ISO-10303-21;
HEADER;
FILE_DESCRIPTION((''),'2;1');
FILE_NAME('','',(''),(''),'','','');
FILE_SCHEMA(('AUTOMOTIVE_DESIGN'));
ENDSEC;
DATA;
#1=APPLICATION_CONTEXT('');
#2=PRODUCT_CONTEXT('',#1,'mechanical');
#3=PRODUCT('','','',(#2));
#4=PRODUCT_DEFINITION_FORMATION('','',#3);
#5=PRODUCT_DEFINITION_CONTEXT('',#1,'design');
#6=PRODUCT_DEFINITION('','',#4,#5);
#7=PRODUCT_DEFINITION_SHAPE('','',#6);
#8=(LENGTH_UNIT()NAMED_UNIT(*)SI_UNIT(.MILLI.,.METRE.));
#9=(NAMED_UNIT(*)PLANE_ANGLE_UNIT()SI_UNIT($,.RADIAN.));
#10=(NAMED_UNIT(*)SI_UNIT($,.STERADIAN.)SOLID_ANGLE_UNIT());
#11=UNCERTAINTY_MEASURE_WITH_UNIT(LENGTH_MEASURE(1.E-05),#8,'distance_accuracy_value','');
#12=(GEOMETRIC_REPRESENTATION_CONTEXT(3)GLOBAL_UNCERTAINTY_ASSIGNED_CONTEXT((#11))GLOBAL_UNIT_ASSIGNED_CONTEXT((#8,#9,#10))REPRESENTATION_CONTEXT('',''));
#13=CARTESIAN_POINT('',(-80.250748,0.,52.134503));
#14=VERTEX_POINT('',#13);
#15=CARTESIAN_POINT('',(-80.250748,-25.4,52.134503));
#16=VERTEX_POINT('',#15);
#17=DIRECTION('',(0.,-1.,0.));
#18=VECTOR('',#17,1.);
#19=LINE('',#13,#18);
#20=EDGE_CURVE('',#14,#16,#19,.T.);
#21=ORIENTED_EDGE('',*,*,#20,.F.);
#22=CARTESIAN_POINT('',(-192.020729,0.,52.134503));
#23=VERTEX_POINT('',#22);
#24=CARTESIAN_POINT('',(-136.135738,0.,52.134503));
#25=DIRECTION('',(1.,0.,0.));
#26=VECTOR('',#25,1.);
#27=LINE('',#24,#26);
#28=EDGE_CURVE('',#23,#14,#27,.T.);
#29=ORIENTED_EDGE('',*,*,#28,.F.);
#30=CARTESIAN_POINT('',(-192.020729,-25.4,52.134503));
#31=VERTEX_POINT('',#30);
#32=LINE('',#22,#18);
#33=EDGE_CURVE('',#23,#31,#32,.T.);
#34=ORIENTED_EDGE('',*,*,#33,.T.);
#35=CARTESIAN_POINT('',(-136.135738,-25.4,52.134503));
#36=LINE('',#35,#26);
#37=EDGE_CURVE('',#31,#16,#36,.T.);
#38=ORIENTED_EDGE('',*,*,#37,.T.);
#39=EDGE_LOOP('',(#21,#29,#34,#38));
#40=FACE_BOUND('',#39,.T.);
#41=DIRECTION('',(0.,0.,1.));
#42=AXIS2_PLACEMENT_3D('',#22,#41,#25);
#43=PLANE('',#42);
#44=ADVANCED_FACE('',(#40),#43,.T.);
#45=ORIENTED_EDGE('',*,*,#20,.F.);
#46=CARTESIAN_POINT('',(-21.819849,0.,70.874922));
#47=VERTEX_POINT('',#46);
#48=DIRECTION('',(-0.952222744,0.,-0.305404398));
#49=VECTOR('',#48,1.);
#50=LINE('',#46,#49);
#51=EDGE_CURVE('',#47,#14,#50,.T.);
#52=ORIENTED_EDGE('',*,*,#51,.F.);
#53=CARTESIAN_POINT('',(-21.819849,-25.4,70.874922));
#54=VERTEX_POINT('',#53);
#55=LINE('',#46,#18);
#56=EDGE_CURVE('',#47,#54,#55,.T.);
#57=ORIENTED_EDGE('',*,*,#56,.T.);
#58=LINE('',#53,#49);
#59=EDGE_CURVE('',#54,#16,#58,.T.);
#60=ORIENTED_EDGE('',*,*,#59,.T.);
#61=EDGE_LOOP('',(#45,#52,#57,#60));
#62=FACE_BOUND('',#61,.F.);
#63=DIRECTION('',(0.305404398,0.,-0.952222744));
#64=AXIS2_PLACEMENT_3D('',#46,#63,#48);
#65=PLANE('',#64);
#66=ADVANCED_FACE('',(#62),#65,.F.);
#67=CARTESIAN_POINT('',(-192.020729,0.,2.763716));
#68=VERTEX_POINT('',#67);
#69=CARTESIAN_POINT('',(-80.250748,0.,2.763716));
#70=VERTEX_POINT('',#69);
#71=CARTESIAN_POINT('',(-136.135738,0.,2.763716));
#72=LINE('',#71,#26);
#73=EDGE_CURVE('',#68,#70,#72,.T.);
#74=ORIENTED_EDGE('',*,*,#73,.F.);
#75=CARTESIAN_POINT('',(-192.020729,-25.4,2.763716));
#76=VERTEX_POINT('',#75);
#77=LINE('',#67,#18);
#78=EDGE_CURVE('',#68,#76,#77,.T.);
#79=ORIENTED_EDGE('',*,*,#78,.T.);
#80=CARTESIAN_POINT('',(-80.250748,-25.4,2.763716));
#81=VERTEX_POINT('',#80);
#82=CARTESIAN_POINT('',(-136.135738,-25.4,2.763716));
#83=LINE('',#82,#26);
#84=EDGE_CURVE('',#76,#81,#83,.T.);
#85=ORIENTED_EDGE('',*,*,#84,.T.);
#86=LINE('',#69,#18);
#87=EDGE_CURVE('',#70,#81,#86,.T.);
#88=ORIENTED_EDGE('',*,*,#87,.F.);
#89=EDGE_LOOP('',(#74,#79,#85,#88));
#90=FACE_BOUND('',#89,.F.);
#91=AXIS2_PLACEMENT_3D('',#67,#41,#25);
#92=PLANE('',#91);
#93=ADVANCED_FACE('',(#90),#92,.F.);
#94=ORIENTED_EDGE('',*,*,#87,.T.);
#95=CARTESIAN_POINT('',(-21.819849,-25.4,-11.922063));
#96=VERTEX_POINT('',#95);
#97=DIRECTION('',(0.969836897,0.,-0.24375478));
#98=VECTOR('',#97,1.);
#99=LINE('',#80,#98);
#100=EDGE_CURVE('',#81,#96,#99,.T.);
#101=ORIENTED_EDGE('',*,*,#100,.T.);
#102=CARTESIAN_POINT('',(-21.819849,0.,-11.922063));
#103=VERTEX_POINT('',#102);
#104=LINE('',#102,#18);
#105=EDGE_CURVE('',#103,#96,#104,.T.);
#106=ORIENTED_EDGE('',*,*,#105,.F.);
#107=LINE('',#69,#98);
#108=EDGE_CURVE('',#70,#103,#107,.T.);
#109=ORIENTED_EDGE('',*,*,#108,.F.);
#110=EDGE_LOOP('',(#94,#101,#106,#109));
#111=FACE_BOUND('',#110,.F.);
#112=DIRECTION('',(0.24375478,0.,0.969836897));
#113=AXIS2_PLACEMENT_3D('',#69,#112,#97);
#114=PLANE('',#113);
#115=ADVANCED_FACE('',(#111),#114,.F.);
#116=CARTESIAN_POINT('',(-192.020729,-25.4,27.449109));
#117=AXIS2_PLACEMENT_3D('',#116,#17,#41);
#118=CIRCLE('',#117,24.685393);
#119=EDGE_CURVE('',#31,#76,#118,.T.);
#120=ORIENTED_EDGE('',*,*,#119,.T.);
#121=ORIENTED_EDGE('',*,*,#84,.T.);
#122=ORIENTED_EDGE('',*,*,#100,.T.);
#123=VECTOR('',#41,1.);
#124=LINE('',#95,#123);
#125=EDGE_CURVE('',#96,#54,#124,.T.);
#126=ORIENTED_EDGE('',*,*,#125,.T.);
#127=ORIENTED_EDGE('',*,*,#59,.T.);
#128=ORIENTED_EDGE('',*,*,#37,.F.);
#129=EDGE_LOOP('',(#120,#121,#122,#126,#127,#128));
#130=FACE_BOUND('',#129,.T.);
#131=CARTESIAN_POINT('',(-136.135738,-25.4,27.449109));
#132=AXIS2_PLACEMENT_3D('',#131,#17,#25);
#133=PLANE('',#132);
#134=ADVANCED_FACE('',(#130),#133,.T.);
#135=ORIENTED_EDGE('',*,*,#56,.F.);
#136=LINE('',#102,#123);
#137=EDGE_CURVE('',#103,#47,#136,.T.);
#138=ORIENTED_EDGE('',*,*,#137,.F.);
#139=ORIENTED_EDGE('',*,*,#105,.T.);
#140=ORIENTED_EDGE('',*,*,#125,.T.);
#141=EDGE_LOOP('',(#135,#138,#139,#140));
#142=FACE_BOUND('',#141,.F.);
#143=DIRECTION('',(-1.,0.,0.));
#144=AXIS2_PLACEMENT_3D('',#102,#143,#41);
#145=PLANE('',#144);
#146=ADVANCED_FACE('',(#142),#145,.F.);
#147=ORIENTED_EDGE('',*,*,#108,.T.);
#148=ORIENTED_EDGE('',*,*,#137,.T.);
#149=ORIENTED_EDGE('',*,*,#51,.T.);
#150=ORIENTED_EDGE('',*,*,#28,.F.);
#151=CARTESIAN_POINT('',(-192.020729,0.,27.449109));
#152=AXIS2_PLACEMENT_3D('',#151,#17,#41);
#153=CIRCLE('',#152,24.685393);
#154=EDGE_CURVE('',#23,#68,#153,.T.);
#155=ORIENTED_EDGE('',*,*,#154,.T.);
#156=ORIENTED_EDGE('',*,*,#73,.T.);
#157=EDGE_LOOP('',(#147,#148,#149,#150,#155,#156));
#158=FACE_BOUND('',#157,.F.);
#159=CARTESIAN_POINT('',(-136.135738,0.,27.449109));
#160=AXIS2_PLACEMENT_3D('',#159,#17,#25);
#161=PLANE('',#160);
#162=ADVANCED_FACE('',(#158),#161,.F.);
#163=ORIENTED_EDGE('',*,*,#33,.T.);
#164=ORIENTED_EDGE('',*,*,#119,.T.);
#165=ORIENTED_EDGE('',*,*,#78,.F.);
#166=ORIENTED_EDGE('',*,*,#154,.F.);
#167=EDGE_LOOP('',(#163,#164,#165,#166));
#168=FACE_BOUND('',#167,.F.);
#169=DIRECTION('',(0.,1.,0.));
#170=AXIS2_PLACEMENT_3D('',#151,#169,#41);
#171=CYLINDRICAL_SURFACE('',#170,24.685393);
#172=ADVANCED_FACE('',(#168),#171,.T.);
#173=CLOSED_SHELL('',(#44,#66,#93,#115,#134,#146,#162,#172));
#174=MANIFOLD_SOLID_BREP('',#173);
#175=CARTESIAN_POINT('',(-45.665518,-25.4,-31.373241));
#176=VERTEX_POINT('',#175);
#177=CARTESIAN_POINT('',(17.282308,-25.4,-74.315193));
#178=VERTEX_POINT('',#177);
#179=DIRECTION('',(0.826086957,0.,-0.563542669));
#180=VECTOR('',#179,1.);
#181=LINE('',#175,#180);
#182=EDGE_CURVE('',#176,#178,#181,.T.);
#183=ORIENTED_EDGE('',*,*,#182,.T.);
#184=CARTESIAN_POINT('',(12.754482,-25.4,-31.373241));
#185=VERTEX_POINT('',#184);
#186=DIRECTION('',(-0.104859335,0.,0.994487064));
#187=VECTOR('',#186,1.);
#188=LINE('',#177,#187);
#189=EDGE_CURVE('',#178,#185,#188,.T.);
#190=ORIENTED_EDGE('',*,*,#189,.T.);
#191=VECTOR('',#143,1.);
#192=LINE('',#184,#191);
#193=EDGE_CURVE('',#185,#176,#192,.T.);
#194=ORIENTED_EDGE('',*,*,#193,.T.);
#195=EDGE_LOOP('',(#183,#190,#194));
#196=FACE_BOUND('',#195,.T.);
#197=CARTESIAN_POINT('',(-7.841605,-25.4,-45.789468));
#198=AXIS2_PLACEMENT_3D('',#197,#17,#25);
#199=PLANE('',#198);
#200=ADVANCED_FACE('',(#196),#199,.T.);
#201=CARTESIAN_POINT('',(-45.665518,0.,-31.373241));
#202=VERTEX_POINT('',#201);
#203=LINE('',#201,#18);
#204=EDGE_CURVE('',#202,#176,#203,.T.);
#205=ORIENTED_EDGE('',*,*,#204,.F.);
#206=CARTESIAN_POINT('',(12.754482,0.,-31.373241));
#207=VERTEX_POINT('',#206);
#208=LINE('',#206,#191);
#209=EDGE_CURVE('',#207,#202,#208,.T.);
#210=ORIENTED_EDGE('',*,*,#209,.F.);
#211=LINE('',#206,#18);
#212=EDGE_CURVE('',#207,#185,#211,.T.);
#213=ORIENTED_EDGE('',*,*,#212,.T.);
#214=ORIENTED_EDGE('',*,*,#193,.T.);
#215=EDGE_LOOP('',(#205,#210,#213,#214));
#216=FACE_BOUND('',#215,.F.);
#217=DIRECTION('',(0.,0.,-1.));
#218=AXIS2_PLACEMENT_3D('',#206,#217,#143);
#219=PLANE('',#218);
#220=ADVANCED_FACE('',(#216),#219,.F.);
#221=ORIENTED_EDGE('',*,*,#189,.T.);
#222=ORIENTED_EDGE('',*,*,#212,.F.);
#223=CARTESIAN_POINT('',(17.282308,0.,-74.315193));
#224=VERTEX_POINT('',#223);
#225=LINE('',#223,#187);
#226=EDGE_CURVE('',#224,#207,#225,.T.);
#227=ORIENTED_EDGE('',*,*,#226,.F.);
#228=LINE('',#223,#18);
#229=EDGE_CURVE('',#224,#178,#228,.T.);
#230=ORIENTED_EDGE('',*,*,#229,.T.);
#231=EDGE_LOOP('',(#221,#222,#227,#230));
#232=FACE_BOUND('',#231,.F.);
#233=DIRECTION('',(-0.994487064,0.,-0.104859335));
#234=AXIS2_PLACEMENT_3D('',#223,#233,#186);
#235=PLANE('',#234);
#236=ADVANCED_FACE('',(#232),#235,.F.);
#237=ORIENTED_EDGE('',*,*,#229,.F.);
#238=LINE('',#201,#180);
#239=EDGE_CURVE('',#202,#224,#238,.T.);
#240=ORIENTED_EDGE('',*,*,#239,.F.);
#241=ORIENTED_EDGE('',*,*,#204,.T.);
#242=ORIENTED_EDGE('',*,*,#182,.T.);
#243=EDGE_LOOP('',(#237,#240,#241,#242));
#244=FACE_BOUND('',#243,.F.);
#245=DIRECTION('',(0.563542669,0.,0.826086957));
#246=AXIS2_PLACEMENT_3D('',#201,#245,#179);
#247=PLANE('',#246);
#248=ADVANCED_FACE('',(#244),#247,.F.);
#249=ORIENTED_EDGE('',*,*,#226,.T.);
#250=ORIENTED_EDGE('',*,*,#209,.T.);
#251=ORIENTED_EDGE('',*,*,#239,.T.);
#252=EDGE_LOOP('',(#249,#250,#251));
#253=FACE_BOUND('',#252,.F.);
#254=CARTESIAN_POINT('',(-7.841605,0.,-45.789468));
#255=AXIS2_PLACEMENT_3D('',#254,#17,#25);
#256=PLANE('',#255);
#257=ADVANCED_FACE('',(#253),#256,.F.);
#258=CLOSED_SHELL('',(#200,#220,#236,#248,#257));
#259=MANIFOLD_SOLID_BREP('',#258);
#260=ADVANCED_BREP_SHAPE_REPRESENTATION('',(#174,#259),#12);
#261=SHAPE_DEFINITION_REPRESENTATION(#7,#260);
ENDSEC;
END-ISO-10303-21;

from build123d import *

# Parameters (mm, degrees)
F0_W     = 111.7699816823
F0_H     = 49.370786408
F1_DEPTH = 25.4
F2_DEPTH = 25.4
F4_DEPTH = 25.4


# Not quite as in the source:
# - the program builds the solid bodies; features that only make, move or delete a surface that nothing else refers to are left out


with BuildPart() as f1:
    # F0 (on Front) → F1 (new body)
    with BuildSketch(Plane.XZ):
        with Locations((-136.135738343, 27.4491094751)):
            Rectangle(F0_W, F0_H)
        with BuildLine():
            Line((-192.0207291842, 2.7637162711), (-192.0207291842, 52.1345026791))
            ThreePointArc((-192.0207291842, 52.1345026791), (-216.7061223881, 27.4491094751), (-192.0207291842, 2.7637162711))
        make_face()
        Polygon((-21.8198485672, 70.8749219775), (-80.2507475019, 52.1345026791), (-80.2507475019, 2.7637162711), (-21.8198485672, -11.922063306), align=None)
    extrude(amount=F1_DEPTH)

    # F0 (on Front) → F2 (join)
    with BuildSketch(Plane.XZ):
        with Locations((-136.135738343, 27.4491094751)):
            Rectangle(F0_W, F0_H)
        with BuildLine():
            Line((-192.0207291842, 2.7637162711), (-192.0207291842, 52.1345026791))
            ThreePointArc((-192.0207291842, 52.1345026791), (-216.7061223881, 27.4491094751), (-192.0207291842, 2.7637162711))
        make_face()
        Polygon((-21.8198485672, 70.8749219775), (-80.2507475019, 52.1345026791), (-80.2507475019, 2.7637162711), (-21.8198485672, -11.922063306), align=None)
    extrude(amount=F2_DEPTH)


with BuildPart() as f4:
    # F3 (on Front) → F4 (new body)
    with BuildSketch(Plane.XZ):
        Polygon((12.7544817491, -31.3732413198), (-45.6655182509, -31.3732413198), (17.282307836, -74.3151927301), align=None)
    extrude(amount=F4_DEPTH)


solid = Compound([f1.part, f4.part])
